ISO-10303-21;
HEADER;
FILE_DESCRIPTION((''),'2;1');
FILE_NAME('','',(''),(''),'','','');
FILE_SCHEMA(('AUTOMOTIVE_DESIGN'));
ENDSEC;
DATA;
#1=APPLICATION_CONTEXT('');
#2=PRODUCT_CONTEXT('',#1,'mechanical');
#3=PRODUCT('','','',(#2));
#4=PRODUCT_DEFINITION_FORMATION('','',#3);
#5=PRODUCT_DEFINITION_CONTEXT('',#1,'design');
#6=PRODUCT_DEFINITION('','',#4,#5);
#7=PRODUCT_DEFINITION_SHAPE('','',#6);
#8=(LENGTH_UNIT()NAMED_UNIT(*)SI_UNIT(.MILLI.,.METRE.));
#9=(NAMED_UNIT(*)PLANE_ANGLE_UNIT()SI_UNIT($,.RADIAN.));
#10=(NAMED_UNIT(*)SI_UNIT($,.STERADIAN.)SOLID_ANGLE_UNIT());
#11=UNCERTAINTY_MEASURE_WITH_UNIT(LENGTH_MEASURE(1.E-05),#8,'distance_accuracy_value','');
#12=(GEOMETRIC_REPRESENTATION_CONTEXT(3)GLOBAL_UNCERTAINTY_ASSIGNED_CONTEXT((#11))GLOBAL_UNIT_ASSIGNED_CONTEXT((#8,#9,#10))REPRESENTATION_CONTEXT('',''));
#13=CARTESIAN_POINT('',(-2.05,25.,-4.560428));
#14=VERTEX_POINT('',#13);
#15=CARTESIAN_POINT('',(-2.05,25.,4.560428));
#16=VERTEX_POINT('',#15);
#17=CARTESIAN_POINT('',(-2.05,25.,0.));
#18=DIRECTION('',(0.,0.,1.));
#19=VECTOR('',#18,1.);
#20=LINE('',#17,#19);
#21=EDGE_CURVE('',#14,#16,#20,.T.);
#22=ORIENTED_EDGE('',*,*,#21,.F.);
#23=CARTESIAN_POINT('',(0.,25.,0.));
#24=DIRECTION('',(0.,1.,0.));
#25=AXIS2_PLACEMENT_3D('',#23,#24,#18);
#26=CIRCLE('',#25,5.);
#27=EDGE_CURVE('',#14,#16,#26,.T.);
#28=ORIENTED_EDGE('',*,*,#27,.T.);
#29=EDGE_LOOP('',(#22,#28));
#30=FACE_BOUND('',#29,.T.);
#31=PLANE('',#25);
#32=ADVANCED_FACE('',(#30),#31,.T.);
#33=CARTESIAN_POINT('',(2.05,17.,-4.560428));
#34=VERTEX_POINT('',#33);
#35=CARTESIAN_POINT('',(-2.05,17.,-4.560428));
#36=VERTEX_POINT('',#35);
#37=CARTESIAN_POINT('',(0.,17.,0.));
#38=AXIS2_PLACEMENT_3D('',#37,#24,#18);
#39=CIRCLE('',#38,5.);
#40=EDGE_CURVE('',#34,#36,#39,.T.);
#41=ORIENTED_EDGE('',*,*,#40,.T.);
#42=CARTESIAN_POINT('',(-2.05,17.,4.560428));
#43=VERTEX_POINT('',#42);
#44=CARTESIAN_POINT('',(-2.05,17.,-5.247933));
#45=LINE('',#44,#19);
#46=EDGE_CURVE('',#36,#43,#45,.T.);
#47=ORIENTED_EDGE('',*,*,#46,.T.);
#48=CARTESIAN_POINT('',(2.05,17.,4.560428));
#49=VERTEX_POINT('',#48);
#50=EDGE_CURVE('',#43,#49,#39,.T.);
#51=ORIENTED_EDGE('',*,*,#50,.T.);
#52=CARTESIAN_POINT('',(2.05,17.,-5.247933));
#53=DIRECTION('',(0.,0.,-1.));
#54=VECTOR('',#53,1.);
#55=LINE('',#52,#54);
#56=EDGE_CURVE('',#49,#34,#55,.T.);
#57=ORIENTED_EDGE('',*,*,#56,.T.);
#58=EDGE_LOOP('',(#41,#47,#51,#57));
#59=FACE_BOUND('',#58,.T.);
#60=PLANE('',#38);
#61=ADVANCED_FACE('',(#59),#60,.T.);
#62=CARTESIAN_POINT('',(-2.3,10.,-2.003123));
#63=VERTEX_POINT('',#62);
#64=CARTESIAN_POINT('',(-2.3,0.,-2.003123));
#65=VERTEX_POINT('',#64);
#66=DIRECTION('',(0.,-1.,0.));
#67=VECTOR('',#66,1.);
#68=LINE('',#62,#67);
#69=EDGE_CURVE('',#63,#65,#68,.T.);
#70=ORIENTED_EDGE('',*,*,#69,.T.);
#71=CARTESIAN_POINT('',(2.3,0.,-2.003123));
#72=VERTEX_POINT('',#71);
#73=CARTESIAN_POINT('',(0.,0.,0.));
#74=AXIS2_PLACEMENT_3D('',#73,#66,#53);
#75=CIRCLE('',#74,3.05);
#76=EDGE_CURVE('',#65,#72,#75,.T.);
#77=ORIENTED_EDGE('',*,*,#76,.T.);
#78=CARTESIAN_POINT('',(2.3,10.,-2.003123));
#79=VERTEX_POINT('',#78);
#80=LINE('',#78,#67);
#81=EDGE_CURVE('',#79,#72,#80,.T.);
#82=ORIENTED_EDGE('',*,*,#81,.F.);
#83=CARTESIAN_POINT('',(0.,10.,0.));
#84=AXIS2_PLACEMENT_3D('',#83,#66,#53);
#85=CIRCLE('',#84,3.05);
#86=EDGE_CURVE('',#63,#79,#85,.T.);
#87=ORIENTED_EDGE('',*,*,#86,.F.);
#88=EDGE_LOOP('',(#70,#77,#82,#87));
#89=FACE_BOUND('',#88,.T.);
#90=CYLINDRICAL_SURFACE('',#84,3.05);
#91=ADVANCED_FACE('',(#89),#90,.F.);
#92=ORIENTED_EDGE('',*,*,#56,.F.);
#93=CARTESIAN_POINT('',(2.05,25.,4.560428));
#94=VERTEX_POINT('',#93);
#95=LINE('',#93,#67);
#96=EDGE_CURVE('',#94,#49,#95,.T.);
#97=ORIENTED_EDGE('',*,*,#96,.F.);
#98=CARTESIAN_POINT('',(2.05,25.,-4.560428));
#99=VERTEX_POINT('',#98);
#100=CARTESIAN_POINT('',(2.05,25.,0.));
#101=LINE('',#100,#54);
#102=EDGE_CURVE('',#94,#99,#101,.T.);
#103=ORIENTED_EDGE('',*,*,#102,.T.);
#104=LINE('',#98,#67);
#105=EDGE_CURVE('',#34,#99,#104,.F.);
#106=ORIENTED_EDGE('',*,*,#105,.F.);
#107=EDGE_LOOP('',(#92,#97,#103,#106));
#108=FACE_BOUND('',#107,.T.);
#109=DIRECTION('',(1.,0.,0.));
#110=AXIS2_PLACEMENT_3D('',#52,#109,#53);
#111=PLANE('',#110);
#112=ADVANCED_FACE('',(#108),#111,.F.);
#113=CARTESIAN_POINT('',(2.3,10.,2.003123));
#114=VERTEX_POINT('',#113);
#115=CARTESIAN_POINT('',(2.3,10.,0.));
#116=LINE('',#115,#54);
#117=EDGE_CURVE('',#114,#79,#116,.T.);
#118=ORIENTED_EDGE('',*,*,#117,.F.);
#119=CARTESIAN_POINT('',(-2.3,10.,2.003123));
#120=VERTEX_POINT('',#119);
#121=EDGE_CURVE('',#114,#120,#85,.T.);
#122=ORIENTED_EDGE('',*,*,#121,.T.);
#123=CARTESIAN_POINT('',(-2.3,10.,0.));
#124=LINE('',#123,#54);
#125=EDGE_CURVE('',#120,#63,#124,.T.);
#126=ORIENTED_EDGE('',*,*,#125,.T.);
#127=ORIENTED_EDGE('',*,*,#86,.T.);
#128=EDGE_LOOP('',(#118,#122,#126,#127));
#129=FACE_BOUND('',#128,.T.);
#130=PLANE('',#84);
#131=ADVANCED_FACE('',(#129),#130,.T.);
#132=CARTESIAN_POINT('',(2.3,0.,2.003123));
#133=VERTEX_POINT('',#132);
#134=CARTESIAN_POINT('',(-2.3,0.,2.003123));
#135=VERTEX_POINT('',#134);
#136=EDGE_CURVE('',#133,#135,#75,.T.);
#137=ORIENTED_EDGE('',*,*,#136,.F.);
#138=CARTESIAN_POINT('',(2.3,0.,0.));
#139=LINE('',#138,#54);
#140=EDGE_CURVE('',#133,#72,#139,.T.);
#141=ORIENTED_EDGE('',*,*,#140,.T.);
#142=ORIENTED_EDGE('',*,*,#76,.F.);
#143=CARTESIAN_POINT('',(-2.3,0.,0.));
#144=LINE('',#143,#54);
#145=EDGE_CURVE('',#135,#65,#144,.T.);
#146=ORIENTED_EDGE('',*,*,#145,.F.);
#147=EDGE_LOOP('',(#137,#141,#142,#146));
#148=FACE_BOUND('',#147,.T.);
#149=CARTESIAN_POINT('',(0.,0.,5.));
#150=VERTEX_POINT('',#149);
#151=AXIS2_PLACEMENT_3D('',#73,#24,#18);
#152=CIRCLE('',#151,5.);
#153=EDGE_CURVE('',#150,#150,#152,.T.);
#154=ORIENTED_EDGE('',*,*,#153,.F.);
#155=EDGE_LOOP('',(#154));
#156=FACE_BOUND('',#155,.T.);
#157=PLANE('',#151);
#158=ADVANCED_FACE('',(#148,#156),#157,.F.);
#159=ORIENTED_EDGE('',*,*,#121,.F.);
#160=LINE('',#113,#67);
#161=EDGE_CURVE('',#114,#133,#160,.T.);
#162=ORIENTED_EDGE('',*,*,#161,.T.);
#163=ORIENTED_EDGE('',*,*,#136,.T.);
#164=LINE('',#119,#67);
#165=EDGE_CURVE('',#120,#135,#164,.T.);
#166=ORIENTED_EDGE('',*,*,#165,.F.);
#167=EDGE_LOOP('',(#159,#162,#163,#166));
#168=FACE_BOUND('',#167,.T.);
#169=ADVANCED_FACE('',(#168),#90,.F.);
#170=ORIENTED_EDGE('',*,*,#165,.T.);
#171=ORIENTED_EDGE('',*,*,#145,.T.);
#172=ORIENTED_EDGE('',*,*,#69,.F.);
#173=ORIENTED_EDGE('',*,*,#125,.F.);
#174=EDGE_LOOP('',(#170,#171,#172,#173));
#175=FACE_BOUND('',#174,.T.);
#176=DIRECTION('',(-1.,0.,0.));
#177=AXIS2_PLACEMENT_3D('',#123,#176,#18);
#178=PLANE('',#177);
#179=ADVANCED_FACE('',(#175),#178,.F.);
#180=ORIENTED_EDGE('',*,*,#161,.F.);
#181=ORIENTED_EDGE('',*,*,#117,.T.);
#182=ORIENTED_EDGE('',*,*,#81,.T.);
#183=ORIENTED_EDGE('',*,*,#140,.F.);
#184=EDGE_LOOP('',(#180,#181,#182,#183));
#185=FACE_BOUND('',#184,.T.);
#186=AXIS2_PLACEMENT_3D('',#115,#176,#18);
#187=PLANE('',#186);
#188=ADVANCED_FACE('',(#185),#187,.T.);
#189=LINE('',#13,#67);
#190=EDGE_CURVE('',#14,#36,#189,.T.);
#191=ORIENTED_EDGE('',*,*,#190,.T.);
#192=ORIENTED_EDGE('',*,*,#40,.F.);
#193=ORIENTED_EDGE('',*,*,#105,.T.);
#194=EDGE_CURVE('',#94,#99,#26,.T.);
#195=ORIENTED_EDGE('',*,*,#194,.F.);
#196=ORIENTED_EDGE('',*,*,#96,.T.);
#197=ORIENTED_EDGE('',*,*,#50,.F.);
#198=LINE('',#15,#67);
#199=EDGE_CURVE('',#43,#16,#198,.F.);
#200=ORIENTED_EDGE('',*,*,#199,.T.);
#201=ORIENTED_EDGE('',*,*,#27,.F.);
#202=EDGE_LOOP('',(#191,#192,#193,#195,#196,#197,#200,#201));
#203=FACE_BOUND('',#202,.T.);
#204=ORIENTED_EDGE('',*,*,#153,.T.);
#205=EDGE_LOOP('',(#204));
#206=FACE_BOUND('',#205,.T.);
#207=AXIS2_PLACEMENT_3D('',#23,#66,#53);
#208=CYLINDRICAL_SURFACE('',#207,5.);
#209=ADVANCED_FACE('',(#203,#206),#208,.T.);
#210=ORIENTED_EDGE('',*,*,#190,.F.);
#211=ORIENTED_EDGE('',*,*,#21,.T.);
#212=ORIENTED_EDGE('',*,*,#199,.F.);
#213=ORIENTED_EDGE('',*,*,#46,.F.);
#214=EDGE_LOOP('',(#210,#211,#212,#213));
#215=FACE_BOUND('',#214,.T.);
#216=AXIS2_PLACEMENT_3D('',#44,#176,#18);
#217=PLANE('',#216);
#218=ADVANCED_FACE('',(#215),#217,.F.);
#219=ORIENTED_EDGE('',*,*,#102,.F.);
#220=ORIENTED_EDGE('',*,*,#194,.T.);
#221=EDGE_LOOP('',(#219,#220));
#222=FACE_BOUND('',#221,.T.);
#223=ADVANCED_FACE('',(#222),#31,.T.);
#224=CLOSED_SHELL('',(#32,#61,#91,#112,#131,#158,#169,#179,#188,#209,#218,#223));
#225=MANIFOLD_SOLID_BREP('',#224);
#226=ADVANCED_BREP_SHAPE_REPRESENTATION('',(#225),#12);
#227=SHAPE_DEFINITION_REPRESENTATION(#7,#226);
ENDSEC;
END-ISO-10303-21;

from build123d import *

# Parameters (mm, degrees)
BOSS_EXTRUDE1_OUTLINE_R = 5
BOSS_EXTRUDE1_DEPTH     = 25
SKETCH3_W               = 4.1
SKETCH3_H               = 10.495866356
CUT_EXTRUDE1_DEPTH      = 8
CUT_EXTRUDE2_DEPTH      = 10


# Read off the part's stored shape, not the designer's step: Boss-Extrude1
with BuildPart() as part:
    # Boss-Extrude1 outline → Boss-Extrude1 (new body)
    with BuildSketch(Plane(origin=(0, 0, 0), x_dir=(1, 0, 0), z_dir=(0, 1, 0))):
        Circle(BOSS_EXTRUDE1_OUTLINE_R)
    extrude(amount=BOSS_EXTRUDE1_DEPTH)

    # Sketch3 → Cut-Extrude1 (cut)
    with BuildSketch(Plane(origin=(0, 25, 0), x_dir=(1, 0, 0), z_dir=(0, 1, 0))):
        Rectangle(SKETCH3_W, SKETCH3_H)
    extrude(amount=-CUT_EXTRUDE1_DEPTH, mode=Mode.SUBTRACT)

    # Sketch2 → Cut-Extrude2 (cut)
    with BuildSketch(Plane.XZ):
        with BuildLine():
            Line((-2.3, 2.003122562), (-2.3, -2.003122562))
            ThreePointArc((-2.3, -2.003122562), (0, -3.05), (2.3, -2.003122562))
            Line((2.3, -2.003122562), (2.3, 2.003122562))
            ThreePointArc((2.3, 2.003122562), (0, 3.05), (-2.3, 2.003122562))
        make_face()
    extrude(amount=-CUT_EXTRUDE2_DEPTH, mode=Mode.SUBTRACT)


solid = part.part
